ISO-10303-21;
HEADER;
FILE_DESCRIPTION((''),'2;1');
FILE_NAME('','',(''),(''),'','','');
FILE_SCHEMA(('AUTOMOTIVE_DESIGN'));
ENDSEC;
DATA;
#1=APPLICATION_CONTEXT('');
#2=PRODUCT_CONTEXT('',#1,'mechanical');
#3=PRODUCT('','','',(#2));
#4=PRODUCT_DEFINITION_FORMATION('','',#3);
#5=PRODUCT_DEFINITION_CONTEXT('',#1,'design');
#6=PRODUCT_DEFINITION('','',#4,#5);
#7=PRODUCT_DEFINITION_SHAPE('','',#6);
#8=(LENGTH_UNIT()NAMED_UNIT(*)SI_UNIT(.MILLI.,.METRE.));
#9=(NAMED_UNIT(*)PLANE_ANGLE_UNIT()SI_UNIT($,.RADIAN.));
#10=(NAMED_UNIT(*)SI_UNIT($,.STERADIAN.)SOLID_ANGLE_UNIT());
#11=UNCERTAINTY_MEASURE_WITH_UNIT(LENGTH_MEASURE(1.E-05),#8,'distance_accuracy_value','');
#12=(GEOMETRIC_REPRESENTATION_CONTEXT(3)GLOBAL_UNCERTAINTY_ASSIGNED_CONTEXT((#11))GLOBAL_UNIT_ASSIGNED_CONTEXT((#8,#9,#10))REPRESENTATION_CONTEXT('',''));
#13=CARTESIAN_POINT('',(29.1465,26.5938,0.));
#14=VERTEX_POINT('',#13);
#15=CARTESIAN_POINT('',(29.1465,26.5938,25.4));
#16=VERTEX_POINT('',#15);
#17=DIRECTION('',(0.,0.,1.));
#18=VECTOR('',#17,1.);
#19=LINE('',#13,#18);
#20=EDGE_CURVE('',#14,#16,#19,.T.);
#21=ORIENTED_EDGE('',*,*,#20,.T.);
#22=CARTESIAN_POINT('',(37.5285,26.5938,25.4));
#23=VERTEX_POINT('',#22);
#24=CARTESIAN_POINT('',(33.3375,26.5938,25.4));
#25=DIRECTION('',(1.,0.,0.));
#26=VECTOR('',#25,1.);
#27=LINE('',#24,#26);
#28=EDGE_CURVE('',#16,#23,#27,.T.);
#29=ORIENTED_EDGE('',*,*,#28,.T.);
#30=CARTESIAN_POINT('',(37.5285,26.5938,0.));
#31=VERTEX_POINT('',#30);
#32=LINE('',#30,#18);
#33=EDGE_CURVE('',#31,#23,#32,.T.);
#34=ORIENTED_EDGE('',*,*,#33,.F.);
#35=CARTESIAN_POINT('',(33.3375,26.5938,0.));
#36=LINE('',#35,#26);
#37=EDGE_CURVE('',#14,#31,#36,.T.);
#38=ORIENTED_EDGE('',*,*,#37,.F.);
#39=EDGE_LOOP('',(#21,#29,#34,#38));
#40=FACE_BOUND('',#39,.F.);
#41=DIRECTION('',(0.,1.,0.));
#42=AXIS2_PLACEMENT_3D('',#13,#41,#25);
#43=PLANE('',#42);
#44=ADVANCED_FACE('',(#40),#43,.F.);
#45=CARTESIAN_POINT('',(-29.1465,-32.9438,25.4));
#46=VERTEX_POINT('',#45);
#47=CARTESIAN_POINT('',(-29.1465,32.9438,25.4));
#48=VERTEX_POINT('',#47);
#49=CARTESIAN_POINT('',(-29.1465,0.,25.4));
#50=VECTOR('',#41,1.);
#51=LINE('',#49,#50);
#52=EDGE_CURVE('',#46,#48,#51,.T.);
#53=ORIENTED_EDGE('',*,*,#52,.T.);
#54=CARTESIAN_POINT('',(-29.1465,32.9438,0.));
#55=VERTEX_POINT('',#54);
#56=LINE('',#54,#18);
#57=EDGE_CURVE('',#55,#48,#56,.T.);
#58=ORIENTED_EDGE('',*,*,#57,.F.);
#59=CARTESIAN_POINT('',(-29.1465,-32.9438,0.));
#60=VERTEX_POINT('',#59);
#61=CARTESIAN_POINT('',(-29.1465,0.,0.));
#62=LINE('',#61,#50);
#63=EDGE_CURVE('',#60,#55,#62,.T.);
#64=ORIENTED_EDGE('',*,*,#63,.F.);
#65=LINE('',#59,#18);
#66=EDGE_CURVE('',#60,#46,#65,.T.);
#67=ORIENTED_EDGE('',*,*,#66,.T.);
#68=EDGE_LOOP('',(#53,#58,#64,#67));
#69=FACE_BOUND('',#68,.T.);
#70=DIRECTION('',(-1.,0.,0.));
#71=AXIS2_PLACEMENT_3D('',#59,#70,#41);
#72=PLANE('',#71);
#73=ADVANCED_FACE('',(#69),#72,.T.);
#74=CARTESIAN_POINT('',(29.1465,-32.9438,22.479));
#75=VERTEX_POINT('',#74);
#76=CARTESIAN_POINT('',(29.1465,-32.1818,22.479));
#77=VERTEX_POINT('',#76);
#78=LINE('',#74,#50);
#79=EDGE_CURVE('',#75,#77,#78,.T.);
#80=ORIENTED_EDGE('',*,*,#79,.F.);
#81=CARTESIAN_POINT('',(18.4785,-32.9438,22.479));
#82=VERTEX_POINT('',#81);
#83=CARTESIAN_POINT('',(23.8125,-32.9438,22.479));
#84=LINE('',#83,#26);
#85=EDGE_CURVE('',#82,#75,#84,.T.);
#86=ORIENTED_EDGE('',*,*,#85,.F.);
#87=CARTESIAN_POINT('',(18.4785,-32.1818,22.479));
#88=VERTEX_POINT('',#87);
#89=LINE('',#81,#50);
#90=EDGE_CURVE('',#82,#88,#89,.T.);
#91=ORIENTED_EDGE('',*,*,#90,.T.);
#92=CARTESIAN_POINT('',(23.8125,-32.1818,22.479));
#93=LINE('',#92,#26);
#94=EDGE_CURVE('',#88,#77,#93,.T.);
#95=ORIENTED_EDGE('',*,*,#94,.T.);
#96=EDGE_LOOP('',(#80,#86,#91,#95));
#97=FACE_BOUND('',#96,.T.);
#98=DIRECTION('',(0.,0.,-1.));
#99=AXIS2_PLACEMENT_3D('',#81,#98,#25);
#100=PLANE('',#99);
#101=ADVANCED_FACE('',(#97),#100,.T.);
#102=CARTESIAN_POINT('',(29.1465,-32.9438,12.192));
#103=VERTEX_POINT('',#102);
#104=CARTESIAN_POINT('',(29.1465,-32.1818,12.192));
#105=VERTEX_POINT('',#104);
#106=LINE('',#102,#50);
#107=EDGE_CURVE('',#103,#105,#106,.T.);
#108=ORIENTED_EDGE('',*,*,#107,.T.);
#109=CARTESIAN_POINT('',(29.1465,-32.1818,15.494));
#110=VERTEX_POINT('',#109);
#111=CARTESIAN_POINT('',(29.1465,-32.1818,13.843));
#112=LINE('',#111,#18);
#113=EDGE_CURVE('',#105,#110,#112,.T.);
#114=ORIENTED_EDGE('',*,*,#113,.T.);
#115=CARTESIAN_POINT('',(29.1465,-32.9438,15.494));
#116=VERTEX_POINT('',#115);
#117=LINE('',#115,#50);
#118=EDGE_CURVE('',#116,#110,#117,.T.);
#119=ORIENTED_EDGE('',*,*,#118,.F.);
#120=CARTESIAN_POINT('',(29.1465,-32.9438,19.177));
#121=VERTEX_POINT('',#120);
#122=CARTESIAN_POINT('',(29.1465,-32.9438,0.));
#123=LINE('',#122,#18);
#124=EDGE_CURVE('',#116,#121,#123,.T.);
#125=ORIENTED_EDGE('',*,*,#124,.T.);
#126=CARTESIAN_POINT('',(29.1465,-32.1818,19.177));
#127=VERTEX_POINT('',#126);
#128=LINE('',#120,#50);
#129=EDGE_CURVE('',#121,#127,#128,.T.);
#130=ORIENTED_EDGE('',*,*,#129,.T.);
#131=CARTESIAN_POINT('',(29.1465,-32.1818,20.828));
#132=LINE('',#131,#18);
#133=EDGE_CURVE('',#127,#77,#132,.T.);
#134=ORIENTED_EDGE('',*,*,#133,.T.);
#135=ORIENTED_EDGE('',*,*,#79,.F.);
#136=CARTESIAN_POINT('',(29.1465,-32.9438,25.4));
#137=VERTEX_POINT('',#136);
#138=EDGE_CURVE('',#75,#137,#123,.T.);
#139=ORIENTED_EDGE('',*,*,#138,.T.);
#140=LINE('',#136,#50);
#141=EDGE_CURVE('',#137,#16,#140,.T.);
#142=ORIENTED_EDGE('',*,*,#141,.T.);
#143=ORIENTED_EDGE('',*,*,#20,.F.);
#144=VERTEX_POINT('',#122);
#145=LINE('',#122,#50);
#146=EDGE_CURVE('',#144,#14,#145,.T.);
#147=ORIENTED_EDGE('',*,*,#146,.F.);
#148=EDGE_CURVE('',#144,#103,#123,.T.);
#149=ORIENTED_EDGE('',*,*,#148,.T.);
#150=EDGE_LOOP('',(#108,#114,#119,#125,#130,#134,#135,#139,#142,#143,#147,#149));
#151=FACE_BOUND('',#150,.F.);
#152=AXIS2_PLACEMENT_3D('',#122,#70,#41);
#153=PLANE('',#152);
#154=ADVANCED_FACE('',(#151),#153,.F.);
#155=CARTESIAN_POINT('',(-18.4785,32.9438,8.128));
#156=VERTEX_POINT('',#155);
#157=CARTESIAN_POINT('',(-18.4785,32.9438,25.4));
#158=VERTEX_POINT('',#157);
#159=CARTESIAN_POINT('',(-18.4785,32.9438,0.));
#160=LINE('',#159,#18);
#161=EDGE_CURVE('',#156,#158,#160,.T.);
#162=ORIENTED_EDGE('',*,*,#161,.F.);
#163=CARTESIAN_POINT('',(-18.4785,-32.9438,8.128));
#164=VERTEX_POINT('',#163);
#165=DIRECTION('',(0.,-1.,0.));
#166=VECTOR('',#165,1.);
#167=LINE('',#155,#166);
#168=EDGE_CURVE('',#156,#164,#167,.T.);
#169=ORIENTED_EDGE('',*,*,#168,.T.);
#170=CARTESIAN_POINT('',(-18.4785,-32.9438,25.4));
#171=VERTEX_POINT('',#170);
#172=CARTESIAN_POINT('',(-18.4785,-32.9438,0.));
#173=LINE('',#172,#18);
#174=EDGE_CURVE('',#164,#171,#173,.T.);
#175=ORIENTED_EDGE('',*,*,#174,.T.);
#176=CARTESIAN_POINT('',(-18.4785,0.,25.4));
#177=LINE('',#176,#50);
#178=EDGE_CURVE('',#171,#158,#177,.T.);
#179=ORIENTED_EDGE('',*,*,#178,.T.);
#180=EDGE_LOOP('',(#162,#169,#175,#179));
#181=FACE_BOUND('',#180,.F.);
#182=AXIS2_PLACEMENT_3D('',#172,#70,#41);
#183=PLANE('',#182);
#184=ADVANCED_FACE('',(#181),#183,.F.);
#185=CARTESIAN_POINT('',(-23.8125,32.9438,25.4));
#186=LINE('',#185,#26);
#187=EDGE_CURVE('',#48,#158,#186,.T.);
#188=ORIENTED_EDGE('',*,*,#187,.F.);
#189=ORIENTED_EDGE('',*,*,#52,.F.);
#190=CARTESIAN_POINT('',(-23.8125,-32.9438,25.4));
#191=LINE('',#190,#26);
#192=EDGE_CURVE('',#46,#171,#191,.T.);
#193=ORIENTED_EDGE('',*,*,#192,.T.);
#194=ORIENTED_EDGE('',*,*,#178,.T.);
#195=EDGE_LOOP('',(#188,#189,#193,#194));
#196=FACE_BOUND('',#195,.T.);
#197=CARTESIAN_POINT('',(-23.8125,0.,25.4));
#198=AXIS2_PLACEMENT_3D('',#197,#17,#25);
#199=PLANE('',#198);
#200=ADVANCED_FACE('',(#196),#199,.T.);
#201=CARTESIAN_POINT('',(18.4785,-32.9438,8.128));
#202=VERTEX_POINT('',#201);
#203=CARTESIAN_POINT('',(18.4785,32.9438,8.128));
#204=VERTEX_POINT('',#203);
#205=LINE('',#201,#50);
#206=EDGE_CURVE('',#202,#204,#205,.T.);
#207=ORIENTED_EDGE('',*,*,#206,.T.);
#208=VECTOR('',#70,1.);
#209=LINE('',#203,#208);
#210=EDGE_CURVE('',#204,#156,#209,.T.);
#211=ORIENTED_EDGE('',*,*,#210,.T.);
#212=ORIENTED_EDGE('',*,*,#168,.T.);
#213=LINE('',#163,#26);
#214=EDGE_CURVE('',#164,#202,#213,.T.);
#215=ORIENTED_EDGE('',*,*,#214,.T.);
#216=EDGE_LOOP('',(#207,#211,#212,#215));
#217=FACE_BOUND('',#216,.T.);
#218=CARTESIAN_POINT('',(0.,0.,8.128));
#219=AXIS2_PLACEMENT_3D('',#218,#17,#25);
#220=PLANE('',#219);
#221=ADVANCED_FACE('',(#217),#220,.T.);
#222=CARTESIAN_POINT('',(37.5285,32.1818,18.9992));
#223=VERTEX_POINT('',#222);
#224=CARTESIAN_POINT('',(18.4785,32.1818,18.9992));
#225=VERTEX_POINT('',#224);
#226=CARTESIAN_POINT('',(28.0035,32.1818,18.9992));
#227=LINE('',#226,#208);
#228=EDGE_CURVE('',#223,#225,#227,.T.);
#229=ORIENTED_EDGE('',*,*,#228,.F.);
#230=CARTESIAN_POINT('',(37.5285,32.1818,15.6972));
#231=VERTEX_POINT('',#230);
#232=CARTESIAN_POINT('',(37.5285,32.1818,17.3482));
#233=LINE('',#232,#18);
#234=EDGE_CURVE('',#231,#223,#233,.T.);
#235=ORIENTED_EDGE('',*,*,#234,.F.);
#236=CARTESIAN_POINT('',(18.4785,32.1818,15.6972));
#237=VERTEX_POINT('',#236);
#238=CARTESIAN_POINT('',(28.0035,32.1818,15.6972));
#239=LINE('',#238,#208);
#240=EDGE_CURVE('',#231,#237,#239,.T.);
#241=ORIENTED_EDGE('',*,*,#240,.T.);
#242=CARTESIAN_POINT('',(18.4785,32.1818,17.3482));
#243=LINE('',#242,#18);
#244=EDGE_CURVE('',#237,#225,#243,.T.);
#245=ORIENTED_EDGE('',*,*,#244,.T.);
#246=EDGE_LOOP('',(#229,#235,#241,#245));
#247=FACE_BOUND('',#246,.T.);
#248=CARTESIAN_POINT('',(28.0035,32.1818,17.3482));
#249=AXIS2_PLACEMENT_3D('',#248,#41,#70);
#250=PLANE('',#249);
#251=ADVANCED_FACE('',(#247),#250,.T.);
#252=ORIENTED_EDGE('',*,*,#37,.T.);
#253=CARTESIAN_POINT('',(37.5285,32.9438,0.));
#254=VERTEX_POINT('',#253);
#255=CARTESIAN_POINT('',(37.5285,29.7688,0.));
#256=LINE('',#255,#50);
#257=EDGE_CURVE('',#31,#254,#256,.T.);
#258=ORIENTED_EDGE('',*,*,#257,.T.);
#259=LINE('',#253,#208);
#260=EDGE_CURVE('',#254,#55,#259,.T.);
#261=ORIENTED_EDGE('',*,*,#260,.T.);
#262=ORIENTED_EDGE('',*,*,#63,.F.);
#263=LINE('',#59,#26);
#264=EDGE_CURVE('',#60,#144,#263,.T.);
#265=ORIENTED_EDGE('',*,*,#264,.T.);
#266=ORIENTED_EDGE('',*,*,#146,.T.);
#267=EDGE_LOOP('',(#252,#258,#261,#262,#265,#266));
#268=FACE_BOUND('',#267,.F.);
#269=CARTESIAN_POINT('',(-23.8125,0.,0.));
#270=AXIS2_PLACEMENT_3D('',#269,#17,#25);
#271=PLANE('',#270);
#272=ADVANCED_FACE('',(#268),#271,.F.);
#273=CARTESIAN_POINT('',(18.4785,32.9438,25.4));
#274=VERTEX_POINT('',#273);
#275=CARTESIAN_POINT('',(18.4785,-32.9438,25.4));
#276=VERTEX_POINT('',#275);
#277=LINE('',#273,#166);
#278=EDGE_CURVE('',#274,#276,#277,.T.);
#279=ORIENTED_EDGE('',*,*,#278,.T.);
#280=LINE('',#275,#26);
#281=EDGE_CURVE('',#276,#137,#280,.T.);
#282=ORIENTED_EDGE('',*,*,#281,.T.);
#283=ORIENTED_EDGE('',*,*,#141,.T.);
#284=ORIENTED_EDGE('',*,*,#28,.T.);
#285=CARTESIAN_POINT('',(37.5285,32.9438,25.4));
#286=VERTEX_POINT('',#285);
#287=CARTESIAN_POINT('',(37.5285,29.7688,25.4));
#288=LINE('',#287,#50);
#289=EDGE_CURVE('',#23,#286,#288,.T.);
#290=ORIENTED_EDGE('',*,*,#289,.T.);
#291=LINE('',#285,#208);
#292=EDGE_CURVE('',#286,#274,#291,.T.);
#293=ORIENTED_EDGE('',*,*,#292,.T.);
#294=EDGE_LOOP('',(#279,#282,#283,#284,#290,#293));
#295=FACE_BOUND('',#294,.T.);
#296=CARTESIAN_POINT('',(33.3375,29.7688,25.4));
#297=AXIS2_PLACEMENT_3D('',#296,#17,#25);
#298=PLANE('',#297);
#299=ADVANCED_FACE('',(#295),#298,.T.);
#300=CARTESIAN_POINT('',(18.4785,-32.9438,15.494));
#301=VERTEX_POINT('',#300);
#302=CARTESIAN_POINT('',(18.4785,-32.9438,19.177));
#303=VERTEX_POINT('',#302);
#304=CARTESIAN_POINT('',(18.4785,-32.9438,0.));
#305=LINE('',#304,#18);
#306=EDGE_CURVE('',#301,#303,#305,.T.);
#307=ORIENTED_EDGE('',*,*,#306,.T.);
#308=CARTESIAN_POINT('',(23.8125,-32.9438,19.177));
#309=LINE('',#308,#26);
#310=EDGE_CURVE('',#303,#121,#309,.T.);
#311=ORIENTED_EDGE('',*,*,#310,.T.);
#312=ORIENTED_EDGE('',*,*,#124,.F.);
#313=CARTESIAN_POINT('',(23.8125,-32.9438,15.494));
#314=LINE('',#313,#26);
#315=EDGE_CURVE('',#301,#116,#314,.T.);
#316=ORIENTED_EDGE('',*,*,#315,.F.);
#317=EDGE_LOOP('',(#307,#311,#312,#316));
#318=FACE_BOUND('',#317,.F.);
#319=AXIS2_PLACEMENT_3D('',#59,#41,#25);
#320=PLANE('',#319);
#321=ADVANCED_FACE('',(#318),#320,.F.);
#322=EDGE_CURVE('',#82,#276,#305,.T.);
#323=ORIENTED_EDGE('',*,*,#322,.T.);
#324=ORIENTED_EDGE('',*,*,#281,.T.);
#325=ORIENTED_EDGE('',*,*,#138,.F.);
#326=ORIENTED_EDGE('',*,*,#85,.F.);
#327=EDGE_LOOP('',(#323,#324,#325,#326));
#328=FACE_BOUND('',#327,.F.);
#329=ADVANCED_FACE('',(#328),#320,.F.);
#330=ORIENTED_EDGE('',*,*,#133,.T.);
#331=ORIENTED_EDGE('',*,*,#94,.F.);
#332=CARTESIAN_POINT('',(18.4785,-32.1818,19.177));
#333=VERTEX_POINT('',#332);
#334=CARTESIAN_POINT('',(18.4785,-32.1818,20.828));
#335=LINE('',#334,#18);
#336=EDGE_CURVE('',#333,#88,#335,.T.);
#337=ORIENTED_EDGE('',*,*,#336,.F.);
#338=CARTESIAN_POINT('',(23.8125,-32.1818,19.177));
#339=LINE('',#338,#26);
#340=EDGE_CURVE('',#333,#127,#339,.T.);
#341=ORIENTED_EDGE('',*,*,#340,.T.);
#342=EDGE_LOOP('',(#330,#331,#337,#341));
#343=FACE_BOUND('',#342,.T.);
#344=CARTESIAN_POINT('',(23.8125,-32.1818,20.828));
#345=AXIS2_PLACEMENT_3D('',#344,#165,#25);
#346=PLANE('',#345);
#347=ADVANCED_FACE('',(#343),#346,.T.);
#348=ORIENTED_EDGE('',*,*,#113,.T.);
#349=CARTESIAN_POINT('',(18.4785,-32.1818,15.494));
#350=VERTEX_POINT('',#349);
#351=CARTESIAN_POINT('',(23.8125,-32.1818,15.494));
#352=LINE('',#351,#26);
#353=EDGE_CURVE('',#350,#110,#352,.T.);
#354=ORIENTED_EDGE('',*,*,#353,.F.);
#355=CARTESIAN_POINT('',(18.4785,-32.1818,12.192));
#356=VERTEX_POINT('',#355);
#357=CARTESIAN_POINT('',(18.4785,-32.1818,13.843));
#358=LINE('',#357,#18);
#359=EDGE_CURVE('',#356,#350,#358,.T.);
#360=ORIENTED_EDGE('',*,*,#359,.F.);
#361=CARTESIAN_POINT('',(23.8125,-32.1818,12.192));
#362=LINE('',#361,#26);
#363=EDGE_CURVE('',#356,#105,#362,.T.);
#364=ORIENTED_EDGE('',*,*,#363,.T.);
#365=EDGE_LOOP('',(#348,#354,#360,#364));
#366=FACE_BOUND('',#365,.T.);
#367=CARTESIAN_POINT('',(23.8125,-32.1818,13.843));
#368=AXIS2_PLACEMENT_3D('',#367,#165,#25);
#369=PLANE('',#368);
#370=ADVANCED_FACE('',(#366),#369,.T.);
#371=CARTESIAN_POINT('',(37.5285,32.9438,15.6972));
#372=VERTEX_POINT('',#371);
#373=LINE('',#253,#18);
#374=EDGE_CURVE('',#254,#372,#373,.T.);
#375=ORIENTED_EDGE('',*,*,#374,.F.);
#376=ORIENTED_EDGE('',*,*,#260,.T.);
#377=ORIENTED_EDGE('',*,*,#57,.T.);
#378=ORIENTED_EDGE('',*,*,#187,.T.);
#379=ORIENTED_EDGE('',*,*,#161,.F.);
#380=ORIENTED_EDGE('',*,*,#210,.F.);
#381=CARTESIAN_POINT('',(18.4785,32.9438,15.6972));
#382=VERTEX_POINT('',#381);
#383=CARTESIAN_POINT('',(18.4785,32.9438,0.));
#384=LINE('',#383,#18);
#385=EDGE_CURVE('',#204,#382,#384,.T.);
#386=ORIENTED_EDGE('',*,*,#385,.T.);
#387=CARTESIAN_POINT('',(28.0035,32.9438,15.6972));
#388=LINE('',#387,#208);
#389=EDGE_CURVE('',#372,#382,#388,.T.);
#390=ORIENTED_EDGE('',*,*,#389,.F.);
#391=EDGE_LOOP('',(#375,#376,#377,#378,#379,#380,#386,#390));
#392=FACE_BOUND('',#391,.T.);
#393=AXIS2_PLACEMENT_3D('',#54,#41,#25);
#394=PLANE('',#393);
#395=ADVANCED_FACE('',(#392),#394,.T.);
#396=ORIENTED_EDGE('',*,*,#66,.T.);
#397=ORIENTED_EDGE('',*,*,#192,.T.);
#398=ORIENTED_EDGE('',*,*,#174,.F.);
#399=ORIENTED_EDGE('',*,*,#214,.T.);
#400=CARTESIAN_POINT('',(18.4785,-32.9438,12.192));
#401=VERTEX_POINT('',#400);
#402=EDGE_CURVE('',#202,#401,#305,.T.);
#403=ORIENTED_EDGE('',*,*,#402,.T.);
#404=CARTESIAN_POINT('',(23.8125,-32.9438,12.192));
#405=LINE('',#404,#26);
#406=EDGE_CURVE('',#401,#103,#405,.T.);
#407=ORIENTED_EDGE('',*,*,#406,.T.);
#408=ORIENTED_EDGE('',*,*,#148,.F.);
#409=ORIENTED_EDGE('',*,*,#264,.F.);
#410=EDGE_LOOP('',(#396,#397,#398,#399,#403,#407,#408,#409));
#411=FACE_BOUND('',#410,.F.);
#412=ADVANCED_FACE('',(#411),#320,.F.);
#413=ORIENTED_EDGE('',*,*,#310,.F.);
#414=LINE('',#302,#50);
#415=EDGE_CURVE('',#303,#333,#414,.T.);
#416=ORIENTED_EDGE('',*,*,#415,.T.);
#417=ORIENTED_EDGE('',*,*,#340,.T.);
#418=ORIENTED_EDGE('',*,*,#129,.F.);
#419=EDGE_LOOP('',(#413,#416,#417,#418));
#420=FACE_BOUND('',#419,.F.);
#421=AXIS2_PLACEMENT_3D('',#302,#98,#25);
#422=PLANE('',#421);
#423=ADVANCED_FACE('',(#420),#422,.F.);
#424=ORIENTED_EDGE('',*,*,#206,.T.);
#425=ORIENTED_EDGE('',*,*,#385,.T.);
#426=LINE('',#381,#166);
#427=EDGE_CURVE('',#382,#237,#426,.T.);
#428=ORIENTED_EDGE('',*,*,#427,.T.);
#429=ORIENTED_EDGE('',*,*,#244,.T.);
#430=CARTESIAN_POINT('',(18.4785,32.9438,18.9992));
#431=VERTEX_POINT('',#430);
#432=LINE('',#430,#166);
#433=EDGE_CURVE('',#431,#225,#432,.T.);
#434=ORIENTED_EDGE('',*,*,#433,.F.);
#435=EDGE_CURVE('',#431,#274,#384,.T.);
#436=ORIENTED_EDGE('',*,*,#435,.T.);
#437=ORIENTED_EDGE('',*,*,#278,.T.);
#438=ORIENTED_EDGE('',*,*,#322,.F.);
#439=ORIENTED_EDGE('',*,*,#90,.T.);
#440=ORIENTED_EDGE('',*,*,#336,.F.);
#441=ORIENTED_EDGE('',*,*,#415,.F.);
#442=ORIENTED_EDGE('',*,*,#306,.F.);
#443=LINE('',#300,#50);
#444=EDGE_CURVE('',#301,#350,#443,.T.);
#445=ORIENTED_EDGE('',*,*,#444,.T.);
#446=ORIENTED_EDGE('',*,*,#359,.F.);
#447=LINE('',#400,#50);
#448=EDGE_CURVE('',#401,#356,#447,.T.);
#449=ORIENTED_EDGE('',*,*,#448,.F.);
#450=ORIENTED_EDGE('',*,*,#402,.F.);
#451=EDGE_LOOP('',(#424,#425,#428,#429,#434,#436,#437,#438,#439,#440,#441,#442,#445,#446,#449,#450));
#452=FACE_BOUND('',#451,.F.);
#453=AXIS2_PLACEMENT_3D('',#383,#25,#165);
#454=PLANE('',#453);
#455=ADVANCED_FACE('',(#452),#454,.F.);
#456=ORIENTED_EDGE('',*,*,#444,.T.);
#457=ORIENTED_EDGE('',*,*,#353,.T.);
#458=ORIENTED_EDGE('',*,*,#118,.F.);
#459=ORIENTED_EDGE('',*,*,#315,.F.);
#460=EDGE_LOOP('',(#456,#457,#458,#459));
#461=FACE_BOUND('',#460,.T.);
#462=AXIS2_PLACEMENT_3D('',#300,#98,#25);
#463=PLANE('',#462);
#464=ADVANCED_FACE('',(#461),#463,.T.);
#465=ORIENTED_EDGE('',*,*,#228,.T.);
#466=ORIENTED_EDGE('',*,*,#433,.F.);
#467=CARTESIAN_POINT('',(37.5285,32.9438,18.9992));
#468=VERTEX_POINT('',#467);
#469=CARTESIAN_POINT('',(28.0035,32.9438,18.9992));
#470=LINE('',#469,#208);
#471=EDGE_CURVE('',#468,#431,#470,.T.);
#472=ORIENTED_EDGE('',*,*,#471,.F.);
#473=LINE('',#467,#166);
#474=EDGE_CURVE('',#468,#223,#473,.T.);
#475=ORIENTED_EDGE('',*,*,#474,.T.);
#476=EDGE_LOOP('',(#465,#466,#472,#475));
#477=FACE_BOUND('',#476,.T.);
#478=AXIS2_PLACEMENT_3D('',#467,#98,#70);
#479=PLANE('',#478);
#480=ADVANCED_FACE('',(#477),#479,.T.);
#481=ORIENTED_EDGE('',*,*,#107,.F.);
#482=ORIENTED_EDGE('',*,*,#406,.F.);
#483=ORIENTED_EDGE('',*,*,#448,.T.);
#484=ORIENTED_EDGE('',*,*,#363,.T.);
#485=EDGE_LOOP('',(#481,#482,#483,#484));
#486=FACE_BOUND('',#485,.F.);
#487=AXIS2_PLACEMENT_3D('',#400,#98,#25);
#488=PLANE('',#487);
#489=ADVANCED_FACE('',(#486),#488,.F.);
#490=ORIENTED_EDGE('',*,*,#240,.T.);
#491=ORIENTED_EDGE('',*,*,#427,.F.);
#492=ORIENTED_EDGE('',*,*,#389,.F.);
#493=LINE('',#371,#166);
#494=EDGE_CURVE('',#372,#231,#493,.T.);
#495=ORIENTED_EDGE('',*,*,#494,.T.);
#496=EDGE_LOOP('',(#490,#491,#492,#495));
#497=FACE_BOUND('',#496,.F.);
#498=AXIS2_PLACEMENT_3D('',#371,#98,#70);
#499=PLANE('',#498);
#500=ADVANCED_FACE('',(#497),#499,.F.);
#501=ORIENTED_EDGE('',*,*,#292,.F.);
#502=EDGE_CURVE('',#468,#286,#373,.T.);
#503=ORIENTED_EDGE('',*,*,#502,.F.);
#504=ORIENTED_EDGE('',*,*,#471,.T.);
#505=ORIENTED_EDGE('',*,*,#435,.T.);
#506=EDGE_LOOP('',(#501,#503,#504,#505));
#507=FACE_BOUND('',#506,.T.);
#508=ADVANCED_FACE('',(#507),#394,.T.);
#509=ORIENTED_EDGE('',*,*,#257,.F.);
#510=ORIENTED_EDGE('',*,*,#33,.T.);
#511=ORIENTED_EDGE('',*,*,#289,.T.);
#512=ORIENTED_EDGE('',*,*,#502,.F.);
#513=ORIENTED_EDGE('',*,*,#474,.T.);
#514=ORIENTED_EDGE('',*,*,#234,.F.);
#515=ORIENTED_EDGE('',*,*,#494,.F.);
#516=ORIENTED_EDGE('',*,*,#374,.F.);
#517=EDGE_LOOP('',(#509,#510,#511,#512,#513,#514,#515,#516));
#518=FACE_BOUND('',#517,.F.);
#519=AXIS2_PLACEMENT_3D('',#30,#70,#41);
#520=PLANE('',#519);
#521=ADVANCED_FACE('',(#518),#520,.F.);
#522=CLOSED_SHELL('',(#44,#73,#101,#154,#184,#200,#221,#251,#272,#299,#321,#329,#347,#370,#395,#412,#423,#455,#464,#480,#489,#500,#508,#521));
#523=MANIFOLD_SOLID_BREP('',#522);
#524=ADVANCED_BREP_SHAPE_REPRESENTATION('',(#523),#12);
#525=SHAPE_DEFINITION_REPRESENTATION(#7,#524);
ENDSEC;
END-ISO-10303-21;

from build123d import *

# Parameters (mm, degrees)
F1_DEPTH = 8.128
F0_W     = 10.668
F0_H     = 65.8876
F0_W_2   = 8.382
F0_H_2   = 6.35
F2_DEPTH = 25.4
F3_W     = 10.668
F3_H     = 3.302
F4_DEPTH = 0.762
F5_W     = 19.05
F5_H     = 3.302
F6_DEPTH = 0.762


# Not quite as in the source:
# - a feature names something its author has since deleted; it is built from what else it names


with BuildPart() as f1:
    # F0 (on Top) → F1 (new body)
    with BuildSketch(Plane.XY):
        Polygon((18.4785, -32.9438), (18.4785, 32.9438), (-1.905, 32.9438), (-18.4785, 32.9438), (-18.4785, -32.9438), (-9.652, -32.9438), (9.652, -32.9438), align=None)
    extrude(amount=F1_DEPTH)

    # F0 (on Top) → F2 (join)
    with BuildSketch(Plane.XY):
        with Locations((-23.8125, 0)):
            Rectangle(F0_W, F0_H)
        with Locations((33.3375, 29.7688)):
            Rectangle(F0_W_2, F0_H_2)
        Polygon((29.1465, 26.5938), (29.1465, 32.9438), (18.4785, 32.9438), (18.4785, -32.9438), (29.1465, -32.9438), (29.1465, -20.2438), align=None)
    extrude(amount=F2_DEPTH)

    # F3 (on face) → F4 (cut)
    with BuildSketch(Plane.XZ.offset(32.9438)):
        with Locations((23.8125, 13.843)):
            Rectangle(F3_W, F3_H)
        with Locations((23.8125, 20.828)):
            Rectangle(F3_W, F3_H)
    extrude(amount=-F4_DEPTH, mode=Mode.SUBTRACT)

    # F5 (on face) → F6 (cut)
    with BuildSketch(Plane(origin=(0, 32.9438, 0), x_dir=(-1, 0, 0), z_dir=(0, 1, 0))):
        with Locations((-28.0035, 17.3482)):
            Rectangle(F5_W, F5_H)
    extrude(amount=-F6_DEPTH, mode=Mode.SUBTRACT)


solid = f1.part
